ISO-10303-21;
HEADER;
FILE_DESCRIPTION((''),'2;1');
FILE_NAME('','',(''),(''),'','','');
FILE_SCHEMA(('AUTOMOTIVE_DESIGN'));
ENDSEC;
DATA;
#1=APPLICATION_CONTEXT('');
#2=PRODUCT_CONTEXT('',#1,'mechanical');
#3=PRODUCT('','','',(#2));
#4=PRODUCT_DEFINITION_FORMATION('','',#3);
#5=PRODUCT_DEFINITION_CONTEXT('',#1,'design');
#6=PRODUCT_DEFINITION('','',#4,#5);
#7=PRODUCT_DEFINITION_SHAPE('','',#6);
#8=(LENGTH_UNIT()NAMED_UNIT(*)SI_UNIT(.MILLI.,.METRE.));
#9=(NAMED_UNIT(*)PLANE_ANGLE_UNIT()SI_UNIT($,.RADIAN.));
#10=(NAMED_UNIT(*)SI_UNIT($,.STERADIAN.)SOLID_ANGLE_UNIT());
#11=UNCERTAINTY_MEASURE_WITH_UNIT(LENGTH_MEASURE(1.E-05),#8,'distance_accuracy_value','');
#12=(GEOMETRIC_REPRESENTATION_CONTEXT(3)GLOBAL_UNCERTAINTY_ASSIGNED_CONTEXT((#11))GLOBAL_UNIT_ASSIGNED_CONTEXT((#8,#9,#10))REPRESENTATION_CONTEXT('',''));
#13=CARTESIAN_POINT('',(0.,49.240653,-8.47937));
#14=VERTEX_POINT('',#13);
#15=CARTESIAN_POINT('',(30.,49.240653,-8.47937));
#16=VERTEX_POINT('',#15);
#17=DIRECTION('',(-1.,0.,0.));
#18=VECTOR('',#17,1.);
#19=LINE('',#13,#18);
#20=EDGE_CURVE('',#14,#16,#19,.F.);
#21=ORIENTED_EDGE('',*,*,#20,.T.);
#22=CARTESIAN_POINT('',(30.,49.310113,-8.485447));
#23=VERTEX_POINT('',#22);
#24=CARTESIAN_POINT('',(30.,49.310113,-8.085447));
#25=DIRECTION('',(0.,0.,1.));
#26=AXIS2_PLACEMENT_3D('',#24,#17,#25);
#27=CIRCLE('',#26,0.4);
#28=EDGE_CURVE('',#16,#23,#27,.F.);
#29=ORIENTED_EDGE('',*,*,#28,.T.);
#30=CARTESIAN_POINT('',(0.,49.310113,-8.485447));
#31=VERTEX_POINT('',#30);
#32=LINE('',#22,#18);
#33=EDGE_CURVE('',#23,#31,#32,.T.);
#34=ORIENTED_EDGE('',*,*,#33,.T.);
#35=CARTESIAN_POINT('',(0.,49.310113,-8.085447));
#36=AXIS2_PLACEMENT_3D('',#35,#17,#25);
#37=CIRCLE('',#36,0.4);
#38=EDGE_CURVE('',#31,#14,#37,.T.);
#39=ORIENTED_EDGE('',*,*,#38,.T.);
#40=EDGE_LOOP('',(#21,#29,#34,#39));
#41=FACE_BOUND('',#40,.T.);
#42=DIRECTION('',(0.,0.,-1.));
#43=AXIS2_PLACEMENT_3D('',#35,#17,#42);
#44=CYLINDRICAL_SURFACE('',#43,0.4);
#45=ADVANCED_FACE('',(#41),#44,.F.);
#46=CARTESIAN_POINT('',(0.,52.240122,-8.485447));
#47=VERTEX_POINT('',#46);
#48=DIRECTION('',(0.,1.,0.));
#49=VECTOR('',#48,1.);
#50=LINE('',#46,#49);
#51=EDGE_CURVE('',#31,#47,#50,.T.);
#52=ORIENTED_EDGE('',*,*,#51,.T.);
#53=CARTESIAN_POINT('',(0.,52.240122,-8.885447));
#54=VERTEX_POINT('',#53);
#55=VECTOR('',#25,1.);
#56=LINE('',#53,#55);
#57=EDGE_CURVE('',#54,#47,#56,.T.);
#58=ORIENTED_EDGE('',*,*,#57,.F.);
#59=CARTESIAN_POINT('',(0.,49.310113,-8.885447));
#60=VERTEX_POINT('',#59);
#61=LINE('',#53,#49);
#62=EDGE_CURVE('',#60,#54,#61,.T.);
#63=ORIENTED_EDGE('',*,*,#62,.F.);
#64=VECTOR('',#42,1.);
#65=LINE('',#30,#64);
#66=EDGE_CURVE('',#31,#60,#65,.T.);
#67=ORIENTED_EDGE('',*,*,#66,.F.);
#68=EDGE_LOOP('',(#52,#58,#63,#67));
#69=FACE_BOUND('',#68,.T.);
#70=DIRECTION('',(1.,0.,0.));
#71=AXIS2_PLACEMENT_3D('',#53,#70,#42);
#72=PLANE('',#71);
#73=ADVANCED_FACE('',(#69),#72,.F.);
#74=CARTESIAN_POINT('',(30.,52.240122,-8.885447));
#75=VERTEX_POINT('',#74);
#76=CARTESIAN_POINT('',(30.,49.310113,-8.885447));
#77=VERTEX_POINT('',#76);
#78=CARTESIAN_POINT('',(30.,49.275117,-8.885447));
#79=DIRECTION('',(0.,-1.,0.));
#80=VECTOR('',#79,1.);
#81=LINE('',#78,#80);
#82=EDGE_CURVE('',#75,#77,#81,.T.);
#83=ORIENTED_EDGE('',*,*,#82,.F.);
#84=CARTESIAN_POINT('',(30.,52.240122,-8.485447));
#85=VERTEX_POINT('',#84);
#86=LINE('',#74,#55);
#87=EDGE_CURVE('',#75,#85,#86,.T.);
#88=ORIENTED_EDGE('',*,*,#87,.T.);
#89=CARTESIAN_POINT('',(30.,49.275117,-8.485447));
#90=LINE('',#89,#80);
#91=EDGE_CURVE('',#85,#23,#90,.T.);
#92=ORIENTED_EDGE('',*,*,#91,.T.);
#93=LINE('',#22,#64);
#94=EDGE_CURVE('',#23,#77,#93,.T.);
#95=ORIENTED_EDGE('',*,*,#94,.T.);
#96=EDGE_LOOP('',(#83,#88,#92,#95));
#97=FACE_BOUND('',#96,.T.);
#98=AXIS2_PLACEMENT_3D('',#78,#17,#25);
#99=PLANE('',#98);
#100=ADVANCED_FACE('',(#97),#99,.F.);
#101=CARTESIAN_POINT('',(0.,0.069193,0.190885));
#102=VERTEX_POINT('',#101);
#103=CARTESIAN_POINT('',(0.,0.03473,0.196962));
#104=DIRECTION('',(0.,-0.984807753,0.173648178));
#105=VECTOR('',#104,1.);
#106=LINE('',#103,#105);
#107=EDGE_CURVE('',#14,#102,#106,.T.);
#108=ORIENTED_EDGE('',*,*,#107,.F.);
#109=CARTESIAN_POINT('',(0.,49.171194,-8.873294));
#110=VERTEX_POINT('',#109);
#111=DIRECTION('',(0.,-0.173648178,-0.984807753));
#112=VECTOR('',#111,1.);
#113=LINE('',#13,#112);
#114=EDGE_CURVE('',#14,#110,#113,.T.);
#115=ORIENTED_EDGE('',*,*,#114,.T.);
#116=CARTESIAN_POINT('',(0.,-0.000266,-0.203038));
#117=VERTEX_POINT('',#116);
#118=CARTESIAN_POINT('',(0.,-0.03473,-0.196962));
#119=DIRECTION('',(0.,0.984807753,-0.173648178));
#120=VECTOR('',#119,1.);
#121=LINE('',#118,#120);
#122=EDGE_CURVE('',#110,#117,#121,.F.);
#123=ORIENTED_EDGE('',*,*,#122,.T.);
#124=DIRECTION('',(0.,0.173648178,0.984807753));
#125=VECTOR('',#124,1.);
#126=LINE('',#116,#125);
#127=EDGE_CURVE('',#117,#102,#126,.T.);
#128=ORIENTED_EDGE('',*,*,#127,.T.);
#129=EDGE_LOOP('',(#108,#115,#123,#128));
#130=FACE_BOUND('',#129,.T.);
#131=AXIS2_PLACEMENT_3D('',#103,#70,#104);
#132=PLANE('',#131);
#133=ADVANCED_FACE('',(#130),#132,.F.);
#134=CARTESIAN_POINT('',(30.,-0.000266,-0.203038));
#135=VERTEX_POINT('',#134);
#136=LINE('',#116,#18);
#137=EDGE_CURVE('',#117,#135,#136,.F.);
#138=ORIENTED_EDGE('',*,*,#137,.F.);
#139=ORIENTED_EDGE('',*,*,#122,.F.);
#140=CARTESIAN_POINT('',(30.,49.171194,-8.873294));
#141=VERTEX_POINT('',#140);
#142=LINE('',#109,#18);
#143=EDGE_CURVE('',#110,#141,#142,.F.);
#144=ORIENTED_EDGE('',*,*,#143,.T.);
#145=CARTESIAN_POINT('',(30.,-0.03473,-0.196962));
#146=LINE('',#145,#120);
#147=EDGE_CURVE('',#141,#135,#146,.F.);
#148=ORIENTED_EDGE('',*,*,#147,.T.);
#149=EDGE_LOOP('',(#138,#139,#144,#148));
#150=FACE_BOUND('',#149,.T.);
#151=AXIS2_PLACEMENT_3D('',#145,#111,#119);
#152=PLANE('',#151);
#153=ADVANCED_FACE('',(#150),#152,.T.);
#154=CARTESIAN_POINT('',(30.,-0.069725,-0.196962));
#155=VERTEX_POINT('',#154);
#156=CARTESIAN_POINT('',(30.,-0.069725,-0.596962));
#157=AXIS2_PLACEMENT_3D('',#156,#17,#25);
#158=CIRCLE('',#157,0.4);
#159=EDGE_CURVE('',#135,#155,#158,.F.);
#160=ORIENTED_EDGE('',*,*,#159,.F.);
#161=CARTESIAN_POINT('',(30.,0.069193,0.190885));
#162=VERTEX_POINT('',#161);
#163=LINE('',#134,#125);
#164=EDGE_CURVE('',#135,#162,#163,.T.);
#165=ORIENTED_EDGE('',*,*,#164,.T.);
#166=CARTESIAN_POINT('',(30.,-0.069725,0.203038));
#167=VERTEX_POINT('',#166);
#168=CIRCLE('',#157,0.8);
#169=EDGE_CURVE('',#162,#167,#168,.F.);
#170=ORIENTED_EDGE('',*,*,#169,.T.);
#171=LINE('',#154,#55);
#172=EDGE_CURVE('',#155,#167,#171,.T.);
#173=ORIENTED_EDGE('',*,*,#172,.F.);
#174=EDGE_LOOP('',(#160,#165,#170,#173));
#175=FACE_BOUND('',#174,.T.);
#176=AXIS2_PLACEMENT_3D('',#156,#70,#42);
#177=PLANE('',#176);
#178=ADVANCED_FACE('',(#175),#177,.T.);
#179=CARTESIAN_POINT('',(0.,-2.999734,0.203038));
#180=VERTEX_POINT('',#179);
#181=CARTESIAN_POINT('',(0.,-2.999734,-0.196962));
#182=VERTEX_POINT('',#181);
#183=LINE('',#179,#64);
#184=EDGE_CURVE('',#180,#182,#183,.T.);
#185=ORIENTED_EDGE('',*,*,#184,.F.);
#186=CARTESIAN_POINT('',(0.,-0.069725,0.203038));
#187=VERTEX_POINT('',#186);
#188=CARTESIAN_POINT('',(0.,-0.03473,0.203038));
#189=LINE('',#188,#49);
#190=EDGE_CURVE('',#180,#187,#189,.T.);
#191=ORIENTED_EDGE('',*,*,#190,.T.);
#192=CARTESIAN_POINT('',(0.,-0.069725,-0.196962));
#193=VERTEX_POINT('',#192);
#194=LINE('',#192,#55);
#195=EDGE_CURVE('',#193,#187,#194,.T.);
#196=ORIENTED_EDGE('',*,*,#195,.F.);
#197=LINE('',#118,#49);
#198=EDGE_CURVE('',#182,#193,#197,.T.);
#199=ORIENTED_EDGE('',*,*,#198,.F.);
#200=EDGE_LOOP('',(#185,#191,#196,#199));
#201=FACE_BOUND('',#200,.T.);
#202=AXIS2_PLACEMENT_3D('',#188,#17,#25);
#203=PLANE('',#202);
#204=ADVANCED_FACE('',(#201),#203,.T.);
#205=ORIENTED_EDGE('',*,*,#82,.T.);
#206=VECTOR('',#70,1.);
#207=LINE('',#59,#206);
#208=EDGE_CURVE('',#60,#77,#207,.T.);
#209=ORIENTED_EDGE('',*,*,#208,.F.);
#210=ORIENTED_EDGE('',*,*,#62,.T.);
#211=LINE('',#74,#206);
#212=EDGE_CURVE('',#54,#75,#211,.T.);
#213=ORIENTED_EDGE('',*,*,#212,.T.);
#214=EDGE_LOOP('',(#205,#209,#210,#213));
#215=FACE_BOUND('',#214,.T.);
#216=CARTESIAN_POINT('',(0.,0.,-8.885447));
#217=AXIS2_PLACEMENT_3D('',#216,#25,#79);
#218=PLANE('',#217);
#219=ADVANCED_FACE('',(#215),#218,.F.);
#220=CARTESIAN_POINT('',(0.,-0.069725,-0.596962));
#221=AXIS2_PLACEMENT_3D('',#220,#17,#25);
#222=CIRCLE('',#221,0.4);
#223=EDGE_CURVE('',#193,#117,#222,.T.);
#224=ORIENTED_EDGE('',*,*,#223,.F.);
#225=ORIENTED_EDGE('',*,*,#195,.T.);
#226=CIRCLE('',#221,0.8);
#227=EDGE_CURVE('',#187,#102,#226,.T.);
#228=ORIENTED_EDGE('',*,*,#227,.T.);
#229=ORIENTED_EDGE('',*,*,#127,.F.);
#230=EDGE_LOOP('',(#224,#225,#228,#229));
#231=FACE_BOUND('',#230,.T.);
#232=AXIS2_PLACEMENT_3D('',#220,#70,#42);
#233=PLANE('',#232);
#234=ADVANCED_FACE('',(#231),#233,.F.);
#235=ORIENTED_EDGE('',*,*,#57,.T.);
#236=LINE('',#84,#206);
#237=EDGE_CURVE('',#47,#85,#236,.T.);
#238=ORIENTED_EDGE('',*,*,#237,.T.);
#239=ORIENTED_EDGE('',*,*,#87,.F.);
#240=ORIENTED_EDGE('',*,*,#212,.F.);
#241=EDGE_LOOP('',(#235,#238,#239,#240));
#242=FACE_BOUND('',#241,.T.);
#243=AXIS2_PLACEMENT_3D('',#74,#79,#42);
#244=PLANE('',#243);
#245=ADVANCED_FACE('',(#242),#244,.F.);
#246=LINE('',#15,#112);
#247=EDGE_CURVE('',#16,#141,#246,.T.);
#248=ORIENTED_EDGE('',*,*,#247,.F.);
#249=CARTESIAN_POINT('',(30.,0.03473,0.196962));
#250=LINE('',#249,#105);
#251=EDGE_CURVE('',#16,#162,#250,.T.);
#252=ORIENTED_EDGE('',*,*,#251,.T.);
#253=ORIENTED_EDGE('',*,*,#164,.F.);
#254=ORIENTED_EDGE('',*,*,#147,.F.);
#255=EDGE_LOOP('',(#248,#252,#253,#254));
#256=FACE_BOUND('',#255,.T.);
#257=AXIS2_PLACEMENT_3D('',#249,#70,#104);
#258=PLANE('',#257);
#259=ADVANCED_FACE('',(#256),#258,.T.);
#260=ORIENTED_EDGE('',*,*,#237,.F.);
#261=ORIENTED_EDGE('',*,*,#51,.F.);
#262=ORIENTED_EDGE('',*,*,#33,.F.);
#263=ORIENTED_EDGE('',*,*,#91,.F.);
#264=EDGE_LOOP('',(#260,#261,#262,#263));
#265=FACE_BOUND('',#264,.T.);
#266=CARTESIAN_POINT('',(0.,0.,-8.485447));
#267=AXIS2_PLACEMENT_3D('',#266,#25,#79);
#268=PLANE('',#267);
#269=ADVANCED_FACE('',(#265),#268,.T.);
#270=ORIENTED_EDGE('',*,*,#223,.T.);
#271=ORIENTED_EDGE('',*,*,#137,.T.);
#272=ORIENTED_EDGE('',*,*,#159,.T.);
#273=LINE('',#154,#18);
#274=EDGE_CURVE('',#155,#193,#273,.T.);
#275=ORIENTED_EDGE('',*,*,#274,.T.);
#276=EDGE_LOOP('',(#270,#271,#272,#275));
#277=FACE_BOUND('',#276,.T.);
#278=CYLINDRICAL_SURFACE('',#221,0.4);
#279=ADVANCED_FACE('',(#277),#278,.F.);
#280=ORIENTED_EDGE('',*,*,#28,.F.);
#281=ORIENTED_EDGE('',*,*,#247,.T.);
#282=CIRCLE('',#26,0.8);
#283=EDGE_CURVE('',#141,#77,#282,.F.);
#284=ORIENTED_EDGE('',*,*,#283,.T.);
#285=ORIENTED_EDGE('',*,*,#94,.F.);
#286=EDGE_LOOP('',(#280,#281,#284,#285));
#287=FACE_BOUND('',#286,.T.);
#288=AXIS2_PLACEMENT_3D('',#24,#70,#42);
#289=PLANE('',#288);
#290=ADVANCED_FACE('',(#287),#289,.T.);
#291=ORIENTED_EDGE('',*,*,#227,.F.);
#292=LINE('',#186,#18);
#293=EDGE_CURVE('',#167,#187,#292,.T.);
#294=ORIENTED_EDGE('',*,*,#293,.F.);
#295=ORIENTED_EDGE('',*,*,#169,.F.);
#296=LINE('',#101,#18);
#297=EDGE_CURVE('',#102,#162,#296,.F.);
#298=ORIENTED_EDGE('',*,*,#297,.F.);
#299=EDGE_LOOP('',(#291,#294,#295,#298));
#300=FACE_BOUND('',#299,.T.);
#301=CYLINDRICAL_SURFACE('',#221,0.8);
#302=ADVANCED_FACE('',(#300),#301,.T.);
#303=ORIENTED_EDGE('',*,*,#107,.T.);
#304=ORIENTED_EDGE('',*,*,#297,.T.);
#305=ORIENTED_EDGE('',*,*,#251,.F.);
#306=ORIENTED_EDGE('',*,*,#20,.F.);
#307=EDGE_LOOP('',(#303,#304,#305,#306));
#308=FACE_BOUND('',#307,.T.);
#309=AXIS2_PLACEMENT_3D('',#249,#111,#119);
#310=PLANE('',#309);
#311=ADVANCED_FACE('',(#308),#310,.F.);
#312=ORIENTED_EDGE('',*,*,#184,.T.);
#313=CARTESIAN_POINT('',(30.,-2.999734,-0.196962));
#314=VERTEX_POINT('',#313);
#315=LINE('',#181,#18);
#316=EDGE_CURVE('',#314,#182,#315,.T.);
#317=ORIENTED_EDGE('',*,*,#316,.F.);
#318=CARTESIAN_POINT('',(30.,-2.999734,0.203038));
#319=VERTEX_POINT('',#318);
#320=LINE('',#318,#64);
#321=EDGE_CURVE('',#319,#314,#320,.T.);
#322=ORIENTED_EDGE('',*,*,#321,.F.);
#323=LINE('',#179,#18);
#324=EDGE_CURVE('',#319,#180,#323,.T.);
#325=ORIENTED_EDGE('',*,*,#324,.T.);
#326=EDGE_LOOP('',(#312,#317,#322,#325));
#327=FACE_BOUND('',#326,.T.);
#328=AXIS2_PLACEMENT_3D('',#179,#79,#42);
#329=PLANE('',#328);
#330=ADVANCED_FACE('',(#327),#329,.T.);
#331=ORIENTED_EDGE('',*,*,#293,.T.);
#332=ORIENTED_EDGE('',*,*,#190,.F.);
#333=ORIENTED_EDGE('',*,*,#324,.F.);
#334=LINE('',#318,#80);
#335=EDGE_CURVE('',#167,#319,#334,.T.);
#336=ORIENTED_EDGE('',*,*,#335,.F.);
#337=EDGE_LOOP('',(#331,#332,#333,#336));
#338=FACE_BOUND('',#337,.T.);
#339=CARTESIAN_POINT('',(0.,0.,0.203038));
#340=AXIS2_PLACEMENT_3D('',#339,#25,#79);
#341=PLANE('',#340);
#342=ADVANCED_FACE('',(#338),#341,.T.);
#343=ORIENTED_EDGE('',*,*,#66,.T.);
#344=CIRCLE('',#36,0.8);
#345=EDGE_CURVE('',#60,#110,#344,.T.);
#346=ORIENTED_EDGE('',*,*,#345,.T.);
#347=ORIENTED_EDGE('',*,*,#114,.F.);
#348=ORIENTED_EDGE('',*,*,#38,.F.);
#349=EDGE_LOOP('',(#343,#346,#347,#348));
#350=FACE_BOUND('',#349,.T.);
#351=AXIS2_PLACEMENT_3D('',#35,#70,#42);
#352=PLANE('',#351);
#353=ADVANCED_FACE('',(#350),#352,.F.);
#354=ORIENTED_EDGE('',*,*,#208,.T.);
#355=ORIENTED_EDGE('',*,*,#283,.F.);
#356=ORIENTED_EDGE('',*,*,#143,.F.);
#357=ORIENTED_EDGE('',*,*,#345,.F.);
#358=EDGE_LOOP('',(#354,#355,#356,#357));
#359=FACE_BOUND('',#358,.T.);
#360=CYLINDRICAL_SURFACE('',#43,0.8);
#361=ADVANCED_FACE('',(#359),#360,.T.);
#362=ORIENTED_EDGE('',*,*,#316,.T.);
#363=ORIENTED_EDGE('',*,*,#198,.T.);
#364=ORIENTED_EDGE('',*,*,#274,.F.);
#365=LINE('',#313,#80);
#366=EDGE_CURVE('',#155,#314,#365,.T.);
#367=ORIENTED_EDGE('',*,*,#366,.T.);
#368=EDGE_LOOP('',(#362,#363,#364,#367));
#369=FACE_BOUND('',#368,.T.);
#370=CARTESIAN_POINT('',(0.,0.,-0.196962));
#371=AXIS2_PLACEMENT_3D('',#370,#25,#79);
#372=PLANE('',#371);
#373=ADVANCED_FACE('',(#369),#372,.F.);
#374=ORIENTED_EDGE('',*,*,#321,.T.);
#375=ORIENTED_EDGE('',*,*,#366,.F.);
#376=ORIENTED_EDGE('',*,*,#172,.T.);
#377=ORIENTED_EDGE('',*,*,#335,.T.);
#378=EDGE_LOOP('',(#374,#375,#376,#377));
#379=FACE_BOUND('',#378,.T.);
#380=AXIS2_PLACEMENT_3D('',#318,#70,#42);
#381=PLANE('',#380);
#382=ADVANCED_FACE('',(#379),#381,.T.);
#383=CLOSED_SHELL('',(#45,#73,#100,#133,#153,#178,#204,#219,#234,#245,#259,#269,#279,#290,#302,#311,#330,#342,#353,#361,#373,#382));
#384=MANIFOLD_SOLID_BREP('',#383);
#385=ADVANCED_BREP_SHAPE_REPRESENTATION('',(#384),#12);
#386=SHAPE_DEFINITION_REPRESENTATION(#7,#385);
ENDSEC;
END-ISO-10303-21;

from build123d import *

# Parameters (mm, degrees)
BOSS_EXTRUDE1_DEPTH          = 30
EDGE_FLANGE1_STRIP_CUT_DEPTH = 30
EDGE_FLANGE1_DEPTH           = 30
EDGE_FLANGE2_STRIP_CUT_DEPTH = 30
EDGE_FLANGE2_DEPTH           = 30


# Sheet-metal steps are written as plain solids
with BuildPart() as part:
    # Sketch1 → Boss-Extrude1 (new body)
    with BuildSketch(Plane(origin=(0, 0, 0), x_dir=(0, 0, -1), z_dir=(1, 0, 0))):
        Polygon((0.196961551, -0.034729636), (8.879370434, 49.205658015), (8.485447333, 49.275117286), (-0.196961551, 0.034729636), align=None)
    extrude(amount=BOSS_EXTRUDE1_DEPTH)

    # Edge-Flange1 strip (across the edge) → Edge-Flange1 strip cut (cut)
    with BuildSketch(Plane(origin=(30, 49.275117286, -8.485447333), x_dir=(0, 0, 1), z_dir=(-1, 0, 0))):
        Polygon((-0.804601829, 2.259615531), (-0.387846202, -0.103923077), (0.006076899, -0.034463806), (-0.410678728, 2.329074802), align=None)
    extrude(amount=EDGE_FLANGE1_STRIP_CUT_DEPTH, mode=Mode.SUBTRACT)

    # Edge-Flange1 section (across the edge) → Edge-Flange1 (add)
    with BuildSketch(Plane(origin=(30, 49.275117286, -8.485447333), x_dir=(0, 0, 1), z_dir=(-1, 0, 0))):
        with BuildLine():
            Line((-0.4, 0.034995465), (-0.4, 2.965004535))
            Line((-0.4, 2.965004535), (0, 2.965004535))
            Line((0, 2.965004535), (0, 0.034995465))
            ThreePointArc((0, 0.034995465), (0.001522121, 0.000133168), (0.006076899, -0.034463806))
            Line((0.006076899, -0.034463806), (-0.387846202, -0.103923077))
            ThreePointArc((-0.387846202, -0.103923077), (-0.396955758, -0.034729129), (-0.4, 0.034995465))
        make_face()
    extrude(amount=EDGE_FLANGE1_DEPTH)

    # Edge-Flange2 strip (across the edge) → Edge-Flange2 strip cut (cut)
    with BuildSketch(Plane(origin=(30, -0.034729636, -0.196961551), x_dir=(0, 0, -1), z_dir=(-1, 0, 0))):
        Polygon((-0.804601829, 2.259615531), (-0.387846202, -0.103923077), (0.006076899, -0.034463806), (-0.410678728, 2.329074802), align=None)
    extrude(amount=EDGE_FLANGE2_STRIP_CUT_DEPTH, mode=Mode.SUBTRACT)

    # Edge-Flange2 section (across the edge) → Edge-Flange2 (add)
    with BuildSketch(Plane(origin=(30, -0.034729636, -0.196961551), x_dir=(0, 0, -1), z_dir=(-1, 0, 0))):
        with BuildLine():
            Line((-0.4, 0.034995465), (-0.4, 2.965004535))
            Line((-0.4, 2.965004535), (0, 2.965004535))
            Line((0, 2.965004535), (0, 0.034995465))
            ThreePointArc((0, 0.034995465), (0.001522121, 0.000133168), (0.006076899, -0.034463806))
            Line((0.006076899, -0.034463806), (-0.387846202, -0.103923077))
            ThreePointArc((-0.387846202, -0.103923077), (-0.396955758, -0.034729129), (-0.4, 0.034995465))
        make_face()
    extrude(amount=EDGE_FLANGE2_DEPTH)


solid = part.part
